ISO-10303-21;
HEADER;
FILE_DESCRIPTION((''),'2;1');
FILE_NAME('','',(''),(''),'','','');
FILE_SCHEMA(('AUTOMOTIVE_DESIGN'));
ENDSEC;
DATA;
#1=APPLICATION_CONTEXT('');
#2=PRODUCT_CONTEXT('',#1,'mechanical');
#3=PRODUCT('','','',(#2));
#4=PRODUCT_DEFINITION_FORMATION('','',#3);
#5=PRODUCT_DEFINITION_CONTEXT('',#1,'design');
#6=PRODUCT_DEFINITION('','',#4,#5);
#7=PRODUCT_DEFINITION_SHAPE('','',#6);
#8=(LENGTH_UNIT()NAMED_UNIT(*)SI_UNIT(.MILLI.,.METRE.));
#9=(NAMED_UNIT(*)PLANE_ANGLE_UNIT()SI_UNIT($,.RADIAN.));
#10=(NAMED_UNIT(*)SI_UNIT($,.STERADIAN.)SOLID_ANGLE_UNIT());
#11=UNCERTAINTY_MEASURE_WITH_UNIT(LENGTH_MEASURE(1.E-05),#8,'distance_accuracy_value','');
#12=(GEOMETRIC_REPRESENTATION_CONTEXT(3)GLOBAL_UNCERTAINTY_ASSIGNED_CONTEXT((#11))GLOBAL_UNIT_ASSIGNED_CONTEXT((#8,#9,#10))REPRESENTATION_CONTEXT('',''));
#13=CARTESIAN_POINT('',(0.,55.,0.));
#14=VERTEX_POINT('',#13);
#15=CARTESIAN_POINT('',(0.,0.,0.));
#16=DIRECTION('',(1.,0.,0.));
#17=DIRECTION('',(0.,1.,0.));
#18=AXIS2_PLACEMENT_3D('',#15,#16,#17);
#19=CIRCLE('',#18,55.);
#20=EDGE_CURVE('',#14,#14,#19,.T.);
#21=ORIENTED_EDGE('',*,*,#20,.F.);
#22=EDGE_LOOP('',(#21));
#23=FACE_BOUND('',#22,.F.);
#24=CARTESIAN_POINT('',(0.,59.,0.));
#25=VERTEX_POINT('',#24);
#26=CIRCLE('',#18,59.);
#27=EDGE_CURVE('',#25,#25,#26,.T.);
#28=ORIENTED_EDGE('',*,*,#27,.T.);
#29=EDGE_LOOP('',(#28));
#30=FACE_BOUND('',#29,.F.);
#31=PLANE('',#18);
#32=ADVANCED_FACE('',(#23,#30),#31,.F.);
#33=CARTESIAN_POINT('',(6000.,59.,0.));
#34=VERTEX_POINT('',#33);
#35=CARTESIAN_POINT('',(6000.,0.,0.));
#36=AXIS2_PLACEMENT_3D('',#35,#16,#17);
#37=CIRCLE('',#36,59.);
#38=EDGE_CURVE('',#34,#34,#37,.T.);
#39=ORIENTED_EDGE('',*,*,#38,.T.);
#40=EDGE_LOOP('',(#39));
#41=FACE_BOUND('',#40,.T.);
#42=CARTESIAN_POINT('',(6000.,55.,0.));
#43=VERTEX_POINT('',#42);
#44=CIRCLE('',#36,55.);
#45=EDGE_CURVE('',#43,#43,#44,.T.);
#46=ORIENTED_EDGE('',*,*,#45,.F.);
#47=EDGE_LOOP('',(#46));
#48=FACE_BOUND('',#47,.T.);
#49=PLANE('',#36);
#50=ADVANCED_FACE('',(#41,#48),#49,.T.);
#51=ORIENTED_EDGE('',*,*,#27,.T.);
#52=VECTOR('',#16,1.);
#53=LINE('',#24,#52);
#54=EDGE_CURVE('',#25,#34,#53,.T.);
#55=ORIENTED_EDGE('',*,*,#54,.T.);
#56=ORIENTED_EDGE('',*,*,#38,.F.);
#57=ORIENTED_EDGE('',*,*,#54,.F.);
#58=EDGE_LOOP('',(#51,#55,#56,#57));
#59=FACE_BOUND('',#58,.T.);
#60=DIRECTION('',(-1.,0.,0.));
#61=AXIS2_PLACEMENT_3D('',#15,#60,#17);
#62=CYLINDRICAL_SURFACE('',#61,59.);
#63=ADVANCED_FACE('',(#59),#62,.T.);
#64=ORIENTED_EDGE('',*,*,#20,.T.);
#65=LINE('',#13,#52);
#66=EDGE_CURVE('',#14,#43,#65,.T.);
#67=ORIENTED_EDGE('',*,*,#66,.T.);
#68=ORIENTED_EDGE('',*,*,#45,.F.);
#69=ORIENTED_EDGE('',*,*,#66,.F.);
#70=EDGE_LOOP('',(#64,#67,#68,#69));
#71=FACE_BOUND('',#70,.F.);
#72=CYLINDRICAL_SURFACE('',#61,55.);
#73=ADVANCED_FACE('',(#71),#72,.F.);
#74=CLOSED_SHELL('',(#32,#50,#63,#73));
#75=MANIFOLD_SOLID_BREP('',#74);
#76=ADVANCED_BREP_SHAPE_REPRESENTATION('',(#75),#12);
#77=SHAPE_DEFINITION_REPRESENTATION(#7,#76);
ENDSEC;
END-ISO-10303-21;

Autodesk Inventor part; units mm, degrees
ref_plane "YZ Plane" through (0, 0, 0) normal (1, 0, 0) x (0, 1, 0)
ref_plane "XZ Plane" through (0, 0, 0) normal (0, 1, 0) x (-1, 0, 0)
ref_plane "XY Plane" through (0, 0, 0) normal (0, 0, 1) x (1, 0, 0)
sketch "Sketch1" plane through (0, 0, 0) normal (1, 0, 0) x (0, 1, 0)
  circle A0 centre (0, 0) radius 55
  circle A1 centre (0, 0) radius 59
  dimension "d0" = 110
  dimension "d1" = 4
extrude "Extrusion1" add sketch "Sketch1" along normal blind 6000
properties part number "duct-black-110mm"
